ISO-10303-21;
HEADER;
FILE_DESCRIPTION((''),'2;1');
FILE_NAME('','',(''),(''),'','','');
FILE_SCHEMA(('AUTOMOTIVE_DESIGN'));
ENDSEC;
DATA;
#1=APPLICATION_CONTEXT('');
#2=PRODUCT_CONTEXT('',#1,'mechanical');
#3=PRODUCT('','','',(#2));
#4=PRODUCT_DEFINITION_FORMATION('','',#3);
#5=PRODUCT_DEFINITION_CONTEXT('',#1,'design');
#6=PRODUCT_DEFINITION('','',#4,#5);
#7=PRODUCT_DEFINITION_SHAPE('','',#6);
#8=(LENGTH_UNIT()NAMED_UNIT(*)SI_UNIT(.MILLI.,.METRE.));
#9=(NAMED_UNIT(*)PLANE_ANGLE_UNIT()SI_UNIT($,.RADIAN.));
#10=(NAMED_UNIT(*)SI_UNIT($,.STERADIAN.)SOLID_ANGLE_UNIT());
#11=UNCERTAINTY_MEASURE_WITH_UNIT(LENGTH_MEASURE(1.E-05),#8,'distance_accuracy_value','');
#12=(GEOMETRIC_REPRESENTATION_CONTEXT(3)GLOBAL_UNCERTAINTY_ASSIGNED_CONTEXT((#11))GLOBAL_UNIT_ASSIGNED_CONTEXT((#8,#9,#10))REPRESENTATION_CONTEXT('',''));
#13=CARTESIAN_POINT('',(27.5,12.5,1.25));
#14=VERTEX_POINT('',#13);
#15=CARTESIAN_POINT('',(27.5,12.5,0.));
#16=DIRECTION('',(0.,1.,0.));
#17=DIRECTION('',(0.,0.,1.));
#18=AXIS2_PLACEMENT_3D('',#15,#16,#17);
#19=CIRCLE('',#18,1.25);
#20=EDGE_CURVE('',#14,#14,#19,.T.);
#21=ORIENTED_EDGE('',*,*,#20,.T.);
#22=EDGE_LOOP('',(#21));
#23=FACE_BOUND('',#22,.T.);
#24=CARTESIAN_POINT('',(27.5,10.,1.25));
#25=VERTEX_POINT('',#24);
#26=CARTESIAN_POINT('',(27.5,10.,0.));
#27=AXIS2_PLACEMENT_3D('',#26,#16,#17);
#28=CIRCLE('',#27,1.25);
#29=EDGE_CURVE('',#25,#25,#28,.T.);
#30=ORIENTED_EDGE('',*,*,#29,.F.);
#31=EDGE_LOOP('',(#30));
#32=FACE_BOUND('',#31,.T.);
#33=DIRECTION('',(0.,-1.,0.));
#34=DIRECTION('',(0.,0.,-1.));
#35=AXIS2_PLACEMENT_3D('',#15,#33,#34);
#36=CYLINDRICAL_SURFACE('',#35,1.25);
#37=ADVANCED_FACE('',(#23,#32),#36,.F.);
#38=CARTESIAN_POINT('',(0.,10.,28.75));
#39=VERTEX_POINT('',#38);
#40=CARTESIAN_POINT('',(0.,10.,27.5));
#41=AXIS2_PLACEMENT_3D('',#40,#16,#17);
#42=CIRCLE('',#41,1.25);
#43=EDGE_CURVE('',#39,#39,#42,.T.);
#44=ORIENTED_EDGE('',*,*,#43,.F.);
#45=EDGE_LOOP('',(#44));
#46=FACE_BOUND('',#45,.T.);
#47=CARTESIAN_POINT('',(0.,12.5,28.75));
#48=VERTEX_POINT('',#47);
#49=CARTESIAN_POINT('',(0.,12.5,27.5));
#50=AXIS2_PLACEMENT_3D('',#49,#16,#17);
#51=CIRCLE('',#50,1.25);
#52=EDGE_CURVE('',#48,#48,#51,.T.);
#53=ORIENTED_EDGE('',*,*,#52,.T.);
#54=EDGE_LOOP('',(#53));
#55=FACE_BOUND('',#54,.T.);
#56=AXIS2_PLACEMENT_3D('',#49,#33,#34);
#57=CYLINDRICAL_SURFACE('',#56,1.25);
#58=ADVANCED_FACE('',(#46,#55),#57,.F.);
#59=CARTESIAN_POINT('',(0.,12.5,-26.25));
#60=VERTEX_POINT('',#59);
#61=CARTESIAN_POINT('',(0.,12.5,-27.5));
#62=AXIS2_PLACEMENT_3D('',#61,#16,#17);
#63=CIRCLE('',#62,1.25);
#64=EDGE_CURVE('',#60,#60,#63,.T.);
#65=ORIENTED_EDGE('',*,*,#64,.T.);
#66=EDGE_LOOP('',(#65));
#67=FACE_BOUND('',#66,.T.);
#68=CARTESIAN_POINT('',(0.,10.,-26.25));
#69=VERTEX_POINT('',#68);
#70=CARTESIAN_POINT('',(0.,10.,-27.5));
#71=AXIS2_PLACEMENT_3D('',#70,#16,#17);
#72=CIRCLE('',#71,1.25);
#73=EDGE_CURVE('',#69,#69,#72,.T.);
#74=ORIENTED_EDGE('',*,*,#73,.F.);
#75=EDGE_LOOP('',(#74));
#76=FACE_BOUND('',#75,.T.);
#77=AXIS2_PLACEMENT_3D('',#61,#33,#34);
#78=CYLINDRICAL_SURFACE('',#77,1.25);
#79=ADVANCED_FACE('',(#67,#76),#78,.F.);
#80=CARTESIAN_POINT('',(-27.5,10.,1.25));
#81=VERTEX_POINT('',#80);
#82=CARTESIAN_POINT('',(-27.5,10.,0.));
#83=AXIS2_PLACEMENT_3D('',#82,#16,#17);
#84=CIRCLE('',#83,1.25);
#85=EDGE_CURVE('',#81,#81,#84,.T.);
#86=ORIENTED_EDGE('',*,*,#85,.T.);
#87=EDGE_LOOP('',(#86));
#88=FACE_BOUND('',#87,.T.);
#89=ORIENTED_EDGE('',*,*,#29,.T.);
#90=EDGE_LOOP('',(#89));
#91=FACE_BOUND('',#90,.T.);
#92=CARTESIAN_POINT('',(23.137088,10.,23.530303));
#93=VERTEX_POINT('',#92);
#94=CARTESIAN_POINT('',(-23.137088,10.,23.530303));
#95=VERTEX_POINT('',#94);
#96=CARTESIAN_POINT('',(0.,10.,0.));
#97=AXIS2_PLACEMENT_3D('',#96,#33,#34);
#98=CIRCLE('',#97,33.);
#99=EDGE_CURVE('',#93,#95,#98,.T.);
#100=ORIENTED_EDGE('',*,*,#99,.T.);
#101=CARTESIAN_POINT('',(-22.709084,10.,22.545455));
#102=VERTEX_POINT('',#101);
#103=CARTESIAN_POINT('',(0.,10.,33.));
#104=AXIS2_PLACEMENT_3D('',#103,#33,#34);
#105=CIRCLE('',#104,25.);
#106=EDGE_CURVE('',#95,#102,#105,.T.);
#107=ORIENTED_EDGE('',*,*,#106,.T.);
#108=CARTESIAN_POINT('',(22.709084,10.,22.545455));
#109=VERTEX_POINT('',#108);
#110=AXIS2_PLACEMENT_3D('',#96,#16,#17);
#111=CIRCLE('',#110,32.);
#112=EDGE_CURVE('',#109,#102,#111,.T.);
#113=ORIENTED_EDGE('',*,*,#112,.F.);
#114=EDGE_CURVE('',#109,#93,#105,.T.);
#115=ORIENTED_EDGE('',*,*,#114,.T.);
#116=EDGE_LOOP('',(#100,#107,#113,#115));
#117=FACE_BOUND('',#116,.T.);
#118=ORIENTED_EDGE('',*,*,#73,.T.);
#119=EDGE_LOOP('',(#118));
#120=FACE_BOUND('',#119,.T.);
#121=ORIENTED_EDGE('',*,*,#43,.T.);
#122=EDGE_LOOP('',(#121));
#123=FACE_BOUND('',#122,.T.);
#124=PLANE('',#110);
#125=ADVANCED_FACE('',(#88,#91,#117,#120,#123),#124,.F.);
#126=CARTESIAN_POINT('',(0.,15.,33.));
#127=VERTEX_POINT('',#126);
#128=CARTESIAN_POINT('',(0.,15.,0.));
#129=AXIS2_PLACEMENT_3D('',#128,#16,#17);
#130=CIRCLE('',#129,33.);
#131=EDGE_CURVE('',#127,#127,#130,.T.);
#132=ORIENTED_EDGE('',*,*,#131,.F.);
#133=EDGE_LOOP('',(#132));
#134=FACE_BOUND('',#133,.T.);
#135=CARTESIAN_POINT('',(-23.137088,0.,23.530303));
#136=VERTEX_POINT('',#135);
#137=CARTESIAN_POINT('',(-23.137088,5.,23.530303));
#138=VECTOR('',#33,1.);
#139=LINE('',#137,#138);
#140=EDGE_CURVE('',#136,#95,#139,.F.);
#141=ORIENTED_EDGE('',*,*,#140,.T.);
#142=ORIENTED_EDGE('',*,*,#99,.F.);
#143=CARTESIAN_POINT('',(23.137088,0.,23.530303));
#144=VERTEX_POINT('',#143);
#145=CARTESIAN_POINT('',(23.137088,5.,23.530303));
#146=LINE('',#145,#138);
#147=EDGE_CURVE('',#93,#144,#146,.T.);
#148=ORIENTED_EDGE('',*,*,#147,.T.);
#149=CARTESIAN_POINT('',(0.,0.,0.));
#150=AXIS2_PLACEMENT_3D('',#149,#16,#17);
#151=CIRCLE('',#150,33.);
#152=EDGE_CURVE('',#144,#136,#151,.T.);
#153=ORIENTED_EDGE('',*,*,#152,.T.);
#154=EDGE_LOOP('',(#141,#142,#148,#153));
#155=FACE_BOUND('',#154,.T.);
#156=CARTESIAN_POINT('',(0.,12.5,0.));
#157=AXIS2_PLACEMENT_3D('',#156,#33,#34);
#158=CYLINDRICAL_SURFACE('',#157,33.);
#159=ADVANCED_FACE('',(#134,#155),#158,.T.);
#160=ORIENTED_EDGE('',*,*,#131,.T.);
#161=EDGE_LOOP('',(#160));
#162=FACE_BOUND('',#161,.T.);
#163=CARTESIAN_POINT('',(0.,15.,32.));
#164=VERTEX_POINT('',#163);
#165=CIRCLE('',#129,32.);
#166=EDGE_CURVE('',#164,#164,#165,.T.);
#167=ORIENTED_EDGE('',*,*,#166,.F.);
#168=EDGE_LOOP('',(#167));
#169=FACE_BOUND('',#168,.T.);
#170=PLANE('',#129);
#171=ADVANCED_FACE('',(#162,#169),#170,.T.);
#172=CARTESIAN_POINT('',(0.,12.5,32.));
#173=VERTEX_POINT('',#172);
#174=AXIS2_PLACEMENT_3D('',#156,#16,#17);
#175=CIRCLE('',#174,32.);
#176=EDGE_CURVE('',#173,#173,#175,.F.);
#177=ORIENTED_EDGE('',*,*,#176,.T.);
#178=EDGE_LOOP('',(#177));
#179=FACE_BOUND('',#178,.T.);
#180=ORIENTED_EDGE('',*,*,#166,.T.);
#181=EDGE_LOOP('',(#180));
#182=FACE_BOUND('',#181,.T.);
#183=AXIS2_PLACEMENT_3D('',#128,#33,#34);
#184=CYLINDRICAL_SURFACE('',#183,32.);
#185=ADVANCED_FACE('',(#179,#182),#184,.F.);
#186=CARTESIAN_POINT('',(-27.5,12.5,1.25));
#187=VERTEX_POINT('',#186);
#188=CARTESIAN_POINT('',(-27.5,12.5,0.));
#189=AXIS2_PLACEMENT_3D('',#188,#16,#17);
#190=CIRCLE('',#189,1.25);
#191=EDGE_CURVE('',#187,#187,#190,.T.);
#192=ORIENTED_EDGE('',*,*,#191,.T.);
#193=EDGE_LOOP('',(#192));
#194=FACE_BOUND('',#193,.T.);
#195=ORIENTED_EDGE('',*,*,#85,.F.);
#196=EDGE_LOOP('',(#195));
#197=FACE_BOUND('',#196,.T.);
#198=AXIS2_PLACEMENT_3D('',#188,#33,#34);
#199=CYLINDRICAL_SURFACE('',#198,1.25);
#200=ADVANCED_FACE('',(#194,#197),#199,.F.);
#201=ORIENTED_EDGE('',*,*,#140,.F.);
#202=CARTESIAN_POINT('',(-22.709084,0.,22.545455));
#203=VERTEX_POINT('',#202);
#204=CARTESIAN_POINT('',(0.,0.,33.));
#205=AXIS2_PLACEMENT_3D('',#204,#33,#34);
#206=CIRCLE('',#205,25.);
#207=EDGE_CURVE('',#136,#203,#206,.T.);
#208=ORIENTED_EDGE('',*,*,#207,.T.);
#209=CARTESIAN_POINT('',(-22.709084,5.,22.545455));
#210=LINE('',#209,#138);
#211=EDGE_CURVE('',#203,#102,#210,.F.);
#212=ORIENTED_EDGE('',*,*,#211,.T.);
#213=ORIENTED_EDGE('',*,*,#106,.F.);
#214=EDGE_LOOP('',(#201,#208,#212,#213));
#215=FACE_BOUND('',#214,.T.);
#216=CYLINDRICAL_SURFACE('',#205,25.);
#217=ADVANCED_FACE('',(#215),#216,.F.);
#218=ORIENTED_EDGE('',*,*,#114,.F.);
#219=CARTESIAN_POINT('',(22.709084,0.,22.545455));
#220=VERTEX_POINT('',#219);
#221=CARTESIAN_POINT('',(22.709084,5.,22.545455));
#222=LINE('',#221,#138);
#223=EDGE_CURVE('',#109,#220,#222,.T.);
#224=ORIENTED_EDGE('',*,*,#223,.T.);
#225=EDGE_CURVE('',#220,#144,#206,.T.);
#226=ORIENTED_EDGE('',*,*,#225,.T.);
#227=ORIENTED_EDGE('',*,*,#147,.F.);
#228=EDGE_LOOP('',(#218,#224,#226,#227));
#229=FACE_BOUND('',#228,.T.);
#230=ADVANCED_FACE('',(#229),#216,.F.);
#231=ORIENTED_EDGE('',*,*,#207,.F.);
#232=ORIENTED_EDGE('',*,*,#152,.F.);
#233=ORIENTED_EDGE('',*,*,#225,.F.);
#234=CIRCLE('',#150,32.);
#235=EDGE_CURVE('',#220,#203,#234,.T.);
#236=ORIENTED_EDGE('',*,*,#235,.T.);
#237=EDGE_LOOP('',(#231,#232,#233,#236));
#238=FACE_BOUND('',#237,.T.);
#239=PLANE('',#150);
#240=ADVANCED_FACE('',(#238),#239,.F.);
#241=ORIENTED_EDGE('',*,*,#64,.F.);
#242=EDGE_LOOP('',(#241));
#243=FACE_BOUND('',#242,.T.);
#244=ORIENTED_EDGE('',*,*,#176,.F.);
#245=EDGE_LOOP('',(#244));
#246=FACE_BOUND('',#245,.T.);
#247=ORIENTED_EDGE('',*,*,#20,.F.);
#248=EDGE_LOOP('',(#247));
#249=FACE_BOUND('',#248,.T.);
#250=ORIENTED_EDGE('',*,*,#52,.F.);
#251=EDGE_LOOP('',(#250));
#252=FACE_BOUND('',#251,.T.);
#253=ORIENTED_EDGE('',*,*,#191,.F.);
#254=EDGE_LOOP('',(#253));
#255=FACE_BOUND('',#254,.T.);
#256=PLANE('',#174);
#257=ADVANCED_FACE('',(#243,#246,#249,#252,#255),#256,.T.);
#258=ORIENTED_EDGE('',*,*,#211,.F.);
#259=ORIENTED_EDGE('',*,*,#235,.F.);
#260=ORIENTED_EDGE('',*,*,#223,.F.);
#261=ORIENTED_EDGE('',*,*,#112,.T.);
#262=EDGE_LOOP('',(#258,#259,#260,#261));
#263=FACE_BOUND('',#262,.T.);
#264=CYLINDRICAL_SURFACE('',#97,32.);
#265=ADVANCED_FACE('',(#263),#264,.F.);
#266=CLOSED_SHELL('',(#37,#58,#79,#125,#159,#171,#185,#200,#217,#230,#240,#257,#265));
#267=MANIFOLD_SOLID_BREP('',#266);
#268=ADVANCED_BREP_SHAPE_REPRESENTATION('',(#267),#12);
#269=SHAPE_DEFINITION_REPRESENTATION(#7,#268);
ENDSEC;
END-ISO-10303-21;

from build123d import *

# Parameters (mm, degrees)
SKETCH1_R               = 33
SKETCH1_R_2             = 1.25
BOSS_EXTRUDE1_DEPTH     = 12.5
SKETCH2_R               = 32
CUT_EXTRUDE2_DEPTH      = 10
SKETCH8_R               = 33
SKETCH8_R_2             = 32
BOSS_EXTRUDE2_DEPTH     = 15
CUT_REVOLVE_THIN2_DEPTH = 10


# Read off the part's stored shape, not the designer's step: Cut-Revolve-Thin2
with BuildPart() as part:
    # Sketch1 → Boss-Extrude1 (new body)
    with BuildSketch(Plane(origin=(0, 0, 0), x_dir=(1, 0, 0), z_dir=(0, 1, 0))):
        with Locations(Location((0, 0, 0), (0, 0, 270))):
            Circle(SKETCH1_R)
        with Locations(Location((0, 27.5, 0), (0, 0, 270))):
            Circle(SKETCH1_R_2, mode=Mode.SUBTRACT)
        with Locations(Location((27.5, 0, 0), (0, 0, 270))):
            Circle(SKETCH1_R_2, mode=Mode.SUBTRACT)
        with Locations(Location((0, -27.5, 0), (0, 0, 270))):
            Circle(SKETCH1_R_2, mode=Mode.SUBTRACT)
        with Locations(Location((-27.5, 0, 0), (0, 0, 270))):
            Circle(SKETCH1_R_2, mode=Mode.SUBTRACT)
    extrude(amount=BOSS_EXTRUDE1_DEPTH)

    # Sketch2 → Cut-Extrude2 (cut)
    with BuildSketch(Plane(origin=(0, 0, 0), x_dir=(1, 0, 0), z_dir=(0, 1, 0))):
        with Locations(Location((0, 0, 0), (0, 0, 270))):
            Circle(SKETCH2_R)
    extrude(amount=CUT_EXTRUDE2_DEPTH, mode=Mode.SUBTRACT)

    # Sketch8 → Boss-Extrude2 (add)
    with BuildSketch(Plane(origin=(0, 0, 0), x_dir=(1, 0, 0), z_dir=(0, 1, 0))):
        with Locations(Location((0, 0, 0), (0, 0, 270))):
            Circle(SKETCH8_R)
        with Locations(Location((0, 0, 0), (0, 0, 270))):
            Circle(SKETCH8_R_2, mode=Mode.SUBTRACT)
    extrude(amount=BOSS_EXTRUDE2_DEPTH)

    # Cut-Revolve-Thin2 outline → Cut-Revolve-Thin2 (cut)
    with BuildSketch(Plane(origin=(0, 0, 0), x_dir=(1, 0, 0), z_dir=(0, 1, 0))):
        with BuildLine():
            ThreePointArc((-22.709083631, -22.545454545), (-22.928374212, -23.0355805), (-23.137087961, -23.53030303))
            ThreePointArc((-23.137087961, -23.53030303), (0, -33), (23.137087961, -23.53030303))
            ThreePointArc((23.137087961, -23.53030303), (22.928374212, -23.0355805), (22.709083631, -22.545454545))
            ThreePointArc((22.709083631, -22.545454545), (0, -32), (-22.709083631, -22.545454545))
        make_face()
    extrude(amount=CUT_REVOLVE_THIN2_DEPTH, mode=Mode.SUBTRACT)


solid = part.part
